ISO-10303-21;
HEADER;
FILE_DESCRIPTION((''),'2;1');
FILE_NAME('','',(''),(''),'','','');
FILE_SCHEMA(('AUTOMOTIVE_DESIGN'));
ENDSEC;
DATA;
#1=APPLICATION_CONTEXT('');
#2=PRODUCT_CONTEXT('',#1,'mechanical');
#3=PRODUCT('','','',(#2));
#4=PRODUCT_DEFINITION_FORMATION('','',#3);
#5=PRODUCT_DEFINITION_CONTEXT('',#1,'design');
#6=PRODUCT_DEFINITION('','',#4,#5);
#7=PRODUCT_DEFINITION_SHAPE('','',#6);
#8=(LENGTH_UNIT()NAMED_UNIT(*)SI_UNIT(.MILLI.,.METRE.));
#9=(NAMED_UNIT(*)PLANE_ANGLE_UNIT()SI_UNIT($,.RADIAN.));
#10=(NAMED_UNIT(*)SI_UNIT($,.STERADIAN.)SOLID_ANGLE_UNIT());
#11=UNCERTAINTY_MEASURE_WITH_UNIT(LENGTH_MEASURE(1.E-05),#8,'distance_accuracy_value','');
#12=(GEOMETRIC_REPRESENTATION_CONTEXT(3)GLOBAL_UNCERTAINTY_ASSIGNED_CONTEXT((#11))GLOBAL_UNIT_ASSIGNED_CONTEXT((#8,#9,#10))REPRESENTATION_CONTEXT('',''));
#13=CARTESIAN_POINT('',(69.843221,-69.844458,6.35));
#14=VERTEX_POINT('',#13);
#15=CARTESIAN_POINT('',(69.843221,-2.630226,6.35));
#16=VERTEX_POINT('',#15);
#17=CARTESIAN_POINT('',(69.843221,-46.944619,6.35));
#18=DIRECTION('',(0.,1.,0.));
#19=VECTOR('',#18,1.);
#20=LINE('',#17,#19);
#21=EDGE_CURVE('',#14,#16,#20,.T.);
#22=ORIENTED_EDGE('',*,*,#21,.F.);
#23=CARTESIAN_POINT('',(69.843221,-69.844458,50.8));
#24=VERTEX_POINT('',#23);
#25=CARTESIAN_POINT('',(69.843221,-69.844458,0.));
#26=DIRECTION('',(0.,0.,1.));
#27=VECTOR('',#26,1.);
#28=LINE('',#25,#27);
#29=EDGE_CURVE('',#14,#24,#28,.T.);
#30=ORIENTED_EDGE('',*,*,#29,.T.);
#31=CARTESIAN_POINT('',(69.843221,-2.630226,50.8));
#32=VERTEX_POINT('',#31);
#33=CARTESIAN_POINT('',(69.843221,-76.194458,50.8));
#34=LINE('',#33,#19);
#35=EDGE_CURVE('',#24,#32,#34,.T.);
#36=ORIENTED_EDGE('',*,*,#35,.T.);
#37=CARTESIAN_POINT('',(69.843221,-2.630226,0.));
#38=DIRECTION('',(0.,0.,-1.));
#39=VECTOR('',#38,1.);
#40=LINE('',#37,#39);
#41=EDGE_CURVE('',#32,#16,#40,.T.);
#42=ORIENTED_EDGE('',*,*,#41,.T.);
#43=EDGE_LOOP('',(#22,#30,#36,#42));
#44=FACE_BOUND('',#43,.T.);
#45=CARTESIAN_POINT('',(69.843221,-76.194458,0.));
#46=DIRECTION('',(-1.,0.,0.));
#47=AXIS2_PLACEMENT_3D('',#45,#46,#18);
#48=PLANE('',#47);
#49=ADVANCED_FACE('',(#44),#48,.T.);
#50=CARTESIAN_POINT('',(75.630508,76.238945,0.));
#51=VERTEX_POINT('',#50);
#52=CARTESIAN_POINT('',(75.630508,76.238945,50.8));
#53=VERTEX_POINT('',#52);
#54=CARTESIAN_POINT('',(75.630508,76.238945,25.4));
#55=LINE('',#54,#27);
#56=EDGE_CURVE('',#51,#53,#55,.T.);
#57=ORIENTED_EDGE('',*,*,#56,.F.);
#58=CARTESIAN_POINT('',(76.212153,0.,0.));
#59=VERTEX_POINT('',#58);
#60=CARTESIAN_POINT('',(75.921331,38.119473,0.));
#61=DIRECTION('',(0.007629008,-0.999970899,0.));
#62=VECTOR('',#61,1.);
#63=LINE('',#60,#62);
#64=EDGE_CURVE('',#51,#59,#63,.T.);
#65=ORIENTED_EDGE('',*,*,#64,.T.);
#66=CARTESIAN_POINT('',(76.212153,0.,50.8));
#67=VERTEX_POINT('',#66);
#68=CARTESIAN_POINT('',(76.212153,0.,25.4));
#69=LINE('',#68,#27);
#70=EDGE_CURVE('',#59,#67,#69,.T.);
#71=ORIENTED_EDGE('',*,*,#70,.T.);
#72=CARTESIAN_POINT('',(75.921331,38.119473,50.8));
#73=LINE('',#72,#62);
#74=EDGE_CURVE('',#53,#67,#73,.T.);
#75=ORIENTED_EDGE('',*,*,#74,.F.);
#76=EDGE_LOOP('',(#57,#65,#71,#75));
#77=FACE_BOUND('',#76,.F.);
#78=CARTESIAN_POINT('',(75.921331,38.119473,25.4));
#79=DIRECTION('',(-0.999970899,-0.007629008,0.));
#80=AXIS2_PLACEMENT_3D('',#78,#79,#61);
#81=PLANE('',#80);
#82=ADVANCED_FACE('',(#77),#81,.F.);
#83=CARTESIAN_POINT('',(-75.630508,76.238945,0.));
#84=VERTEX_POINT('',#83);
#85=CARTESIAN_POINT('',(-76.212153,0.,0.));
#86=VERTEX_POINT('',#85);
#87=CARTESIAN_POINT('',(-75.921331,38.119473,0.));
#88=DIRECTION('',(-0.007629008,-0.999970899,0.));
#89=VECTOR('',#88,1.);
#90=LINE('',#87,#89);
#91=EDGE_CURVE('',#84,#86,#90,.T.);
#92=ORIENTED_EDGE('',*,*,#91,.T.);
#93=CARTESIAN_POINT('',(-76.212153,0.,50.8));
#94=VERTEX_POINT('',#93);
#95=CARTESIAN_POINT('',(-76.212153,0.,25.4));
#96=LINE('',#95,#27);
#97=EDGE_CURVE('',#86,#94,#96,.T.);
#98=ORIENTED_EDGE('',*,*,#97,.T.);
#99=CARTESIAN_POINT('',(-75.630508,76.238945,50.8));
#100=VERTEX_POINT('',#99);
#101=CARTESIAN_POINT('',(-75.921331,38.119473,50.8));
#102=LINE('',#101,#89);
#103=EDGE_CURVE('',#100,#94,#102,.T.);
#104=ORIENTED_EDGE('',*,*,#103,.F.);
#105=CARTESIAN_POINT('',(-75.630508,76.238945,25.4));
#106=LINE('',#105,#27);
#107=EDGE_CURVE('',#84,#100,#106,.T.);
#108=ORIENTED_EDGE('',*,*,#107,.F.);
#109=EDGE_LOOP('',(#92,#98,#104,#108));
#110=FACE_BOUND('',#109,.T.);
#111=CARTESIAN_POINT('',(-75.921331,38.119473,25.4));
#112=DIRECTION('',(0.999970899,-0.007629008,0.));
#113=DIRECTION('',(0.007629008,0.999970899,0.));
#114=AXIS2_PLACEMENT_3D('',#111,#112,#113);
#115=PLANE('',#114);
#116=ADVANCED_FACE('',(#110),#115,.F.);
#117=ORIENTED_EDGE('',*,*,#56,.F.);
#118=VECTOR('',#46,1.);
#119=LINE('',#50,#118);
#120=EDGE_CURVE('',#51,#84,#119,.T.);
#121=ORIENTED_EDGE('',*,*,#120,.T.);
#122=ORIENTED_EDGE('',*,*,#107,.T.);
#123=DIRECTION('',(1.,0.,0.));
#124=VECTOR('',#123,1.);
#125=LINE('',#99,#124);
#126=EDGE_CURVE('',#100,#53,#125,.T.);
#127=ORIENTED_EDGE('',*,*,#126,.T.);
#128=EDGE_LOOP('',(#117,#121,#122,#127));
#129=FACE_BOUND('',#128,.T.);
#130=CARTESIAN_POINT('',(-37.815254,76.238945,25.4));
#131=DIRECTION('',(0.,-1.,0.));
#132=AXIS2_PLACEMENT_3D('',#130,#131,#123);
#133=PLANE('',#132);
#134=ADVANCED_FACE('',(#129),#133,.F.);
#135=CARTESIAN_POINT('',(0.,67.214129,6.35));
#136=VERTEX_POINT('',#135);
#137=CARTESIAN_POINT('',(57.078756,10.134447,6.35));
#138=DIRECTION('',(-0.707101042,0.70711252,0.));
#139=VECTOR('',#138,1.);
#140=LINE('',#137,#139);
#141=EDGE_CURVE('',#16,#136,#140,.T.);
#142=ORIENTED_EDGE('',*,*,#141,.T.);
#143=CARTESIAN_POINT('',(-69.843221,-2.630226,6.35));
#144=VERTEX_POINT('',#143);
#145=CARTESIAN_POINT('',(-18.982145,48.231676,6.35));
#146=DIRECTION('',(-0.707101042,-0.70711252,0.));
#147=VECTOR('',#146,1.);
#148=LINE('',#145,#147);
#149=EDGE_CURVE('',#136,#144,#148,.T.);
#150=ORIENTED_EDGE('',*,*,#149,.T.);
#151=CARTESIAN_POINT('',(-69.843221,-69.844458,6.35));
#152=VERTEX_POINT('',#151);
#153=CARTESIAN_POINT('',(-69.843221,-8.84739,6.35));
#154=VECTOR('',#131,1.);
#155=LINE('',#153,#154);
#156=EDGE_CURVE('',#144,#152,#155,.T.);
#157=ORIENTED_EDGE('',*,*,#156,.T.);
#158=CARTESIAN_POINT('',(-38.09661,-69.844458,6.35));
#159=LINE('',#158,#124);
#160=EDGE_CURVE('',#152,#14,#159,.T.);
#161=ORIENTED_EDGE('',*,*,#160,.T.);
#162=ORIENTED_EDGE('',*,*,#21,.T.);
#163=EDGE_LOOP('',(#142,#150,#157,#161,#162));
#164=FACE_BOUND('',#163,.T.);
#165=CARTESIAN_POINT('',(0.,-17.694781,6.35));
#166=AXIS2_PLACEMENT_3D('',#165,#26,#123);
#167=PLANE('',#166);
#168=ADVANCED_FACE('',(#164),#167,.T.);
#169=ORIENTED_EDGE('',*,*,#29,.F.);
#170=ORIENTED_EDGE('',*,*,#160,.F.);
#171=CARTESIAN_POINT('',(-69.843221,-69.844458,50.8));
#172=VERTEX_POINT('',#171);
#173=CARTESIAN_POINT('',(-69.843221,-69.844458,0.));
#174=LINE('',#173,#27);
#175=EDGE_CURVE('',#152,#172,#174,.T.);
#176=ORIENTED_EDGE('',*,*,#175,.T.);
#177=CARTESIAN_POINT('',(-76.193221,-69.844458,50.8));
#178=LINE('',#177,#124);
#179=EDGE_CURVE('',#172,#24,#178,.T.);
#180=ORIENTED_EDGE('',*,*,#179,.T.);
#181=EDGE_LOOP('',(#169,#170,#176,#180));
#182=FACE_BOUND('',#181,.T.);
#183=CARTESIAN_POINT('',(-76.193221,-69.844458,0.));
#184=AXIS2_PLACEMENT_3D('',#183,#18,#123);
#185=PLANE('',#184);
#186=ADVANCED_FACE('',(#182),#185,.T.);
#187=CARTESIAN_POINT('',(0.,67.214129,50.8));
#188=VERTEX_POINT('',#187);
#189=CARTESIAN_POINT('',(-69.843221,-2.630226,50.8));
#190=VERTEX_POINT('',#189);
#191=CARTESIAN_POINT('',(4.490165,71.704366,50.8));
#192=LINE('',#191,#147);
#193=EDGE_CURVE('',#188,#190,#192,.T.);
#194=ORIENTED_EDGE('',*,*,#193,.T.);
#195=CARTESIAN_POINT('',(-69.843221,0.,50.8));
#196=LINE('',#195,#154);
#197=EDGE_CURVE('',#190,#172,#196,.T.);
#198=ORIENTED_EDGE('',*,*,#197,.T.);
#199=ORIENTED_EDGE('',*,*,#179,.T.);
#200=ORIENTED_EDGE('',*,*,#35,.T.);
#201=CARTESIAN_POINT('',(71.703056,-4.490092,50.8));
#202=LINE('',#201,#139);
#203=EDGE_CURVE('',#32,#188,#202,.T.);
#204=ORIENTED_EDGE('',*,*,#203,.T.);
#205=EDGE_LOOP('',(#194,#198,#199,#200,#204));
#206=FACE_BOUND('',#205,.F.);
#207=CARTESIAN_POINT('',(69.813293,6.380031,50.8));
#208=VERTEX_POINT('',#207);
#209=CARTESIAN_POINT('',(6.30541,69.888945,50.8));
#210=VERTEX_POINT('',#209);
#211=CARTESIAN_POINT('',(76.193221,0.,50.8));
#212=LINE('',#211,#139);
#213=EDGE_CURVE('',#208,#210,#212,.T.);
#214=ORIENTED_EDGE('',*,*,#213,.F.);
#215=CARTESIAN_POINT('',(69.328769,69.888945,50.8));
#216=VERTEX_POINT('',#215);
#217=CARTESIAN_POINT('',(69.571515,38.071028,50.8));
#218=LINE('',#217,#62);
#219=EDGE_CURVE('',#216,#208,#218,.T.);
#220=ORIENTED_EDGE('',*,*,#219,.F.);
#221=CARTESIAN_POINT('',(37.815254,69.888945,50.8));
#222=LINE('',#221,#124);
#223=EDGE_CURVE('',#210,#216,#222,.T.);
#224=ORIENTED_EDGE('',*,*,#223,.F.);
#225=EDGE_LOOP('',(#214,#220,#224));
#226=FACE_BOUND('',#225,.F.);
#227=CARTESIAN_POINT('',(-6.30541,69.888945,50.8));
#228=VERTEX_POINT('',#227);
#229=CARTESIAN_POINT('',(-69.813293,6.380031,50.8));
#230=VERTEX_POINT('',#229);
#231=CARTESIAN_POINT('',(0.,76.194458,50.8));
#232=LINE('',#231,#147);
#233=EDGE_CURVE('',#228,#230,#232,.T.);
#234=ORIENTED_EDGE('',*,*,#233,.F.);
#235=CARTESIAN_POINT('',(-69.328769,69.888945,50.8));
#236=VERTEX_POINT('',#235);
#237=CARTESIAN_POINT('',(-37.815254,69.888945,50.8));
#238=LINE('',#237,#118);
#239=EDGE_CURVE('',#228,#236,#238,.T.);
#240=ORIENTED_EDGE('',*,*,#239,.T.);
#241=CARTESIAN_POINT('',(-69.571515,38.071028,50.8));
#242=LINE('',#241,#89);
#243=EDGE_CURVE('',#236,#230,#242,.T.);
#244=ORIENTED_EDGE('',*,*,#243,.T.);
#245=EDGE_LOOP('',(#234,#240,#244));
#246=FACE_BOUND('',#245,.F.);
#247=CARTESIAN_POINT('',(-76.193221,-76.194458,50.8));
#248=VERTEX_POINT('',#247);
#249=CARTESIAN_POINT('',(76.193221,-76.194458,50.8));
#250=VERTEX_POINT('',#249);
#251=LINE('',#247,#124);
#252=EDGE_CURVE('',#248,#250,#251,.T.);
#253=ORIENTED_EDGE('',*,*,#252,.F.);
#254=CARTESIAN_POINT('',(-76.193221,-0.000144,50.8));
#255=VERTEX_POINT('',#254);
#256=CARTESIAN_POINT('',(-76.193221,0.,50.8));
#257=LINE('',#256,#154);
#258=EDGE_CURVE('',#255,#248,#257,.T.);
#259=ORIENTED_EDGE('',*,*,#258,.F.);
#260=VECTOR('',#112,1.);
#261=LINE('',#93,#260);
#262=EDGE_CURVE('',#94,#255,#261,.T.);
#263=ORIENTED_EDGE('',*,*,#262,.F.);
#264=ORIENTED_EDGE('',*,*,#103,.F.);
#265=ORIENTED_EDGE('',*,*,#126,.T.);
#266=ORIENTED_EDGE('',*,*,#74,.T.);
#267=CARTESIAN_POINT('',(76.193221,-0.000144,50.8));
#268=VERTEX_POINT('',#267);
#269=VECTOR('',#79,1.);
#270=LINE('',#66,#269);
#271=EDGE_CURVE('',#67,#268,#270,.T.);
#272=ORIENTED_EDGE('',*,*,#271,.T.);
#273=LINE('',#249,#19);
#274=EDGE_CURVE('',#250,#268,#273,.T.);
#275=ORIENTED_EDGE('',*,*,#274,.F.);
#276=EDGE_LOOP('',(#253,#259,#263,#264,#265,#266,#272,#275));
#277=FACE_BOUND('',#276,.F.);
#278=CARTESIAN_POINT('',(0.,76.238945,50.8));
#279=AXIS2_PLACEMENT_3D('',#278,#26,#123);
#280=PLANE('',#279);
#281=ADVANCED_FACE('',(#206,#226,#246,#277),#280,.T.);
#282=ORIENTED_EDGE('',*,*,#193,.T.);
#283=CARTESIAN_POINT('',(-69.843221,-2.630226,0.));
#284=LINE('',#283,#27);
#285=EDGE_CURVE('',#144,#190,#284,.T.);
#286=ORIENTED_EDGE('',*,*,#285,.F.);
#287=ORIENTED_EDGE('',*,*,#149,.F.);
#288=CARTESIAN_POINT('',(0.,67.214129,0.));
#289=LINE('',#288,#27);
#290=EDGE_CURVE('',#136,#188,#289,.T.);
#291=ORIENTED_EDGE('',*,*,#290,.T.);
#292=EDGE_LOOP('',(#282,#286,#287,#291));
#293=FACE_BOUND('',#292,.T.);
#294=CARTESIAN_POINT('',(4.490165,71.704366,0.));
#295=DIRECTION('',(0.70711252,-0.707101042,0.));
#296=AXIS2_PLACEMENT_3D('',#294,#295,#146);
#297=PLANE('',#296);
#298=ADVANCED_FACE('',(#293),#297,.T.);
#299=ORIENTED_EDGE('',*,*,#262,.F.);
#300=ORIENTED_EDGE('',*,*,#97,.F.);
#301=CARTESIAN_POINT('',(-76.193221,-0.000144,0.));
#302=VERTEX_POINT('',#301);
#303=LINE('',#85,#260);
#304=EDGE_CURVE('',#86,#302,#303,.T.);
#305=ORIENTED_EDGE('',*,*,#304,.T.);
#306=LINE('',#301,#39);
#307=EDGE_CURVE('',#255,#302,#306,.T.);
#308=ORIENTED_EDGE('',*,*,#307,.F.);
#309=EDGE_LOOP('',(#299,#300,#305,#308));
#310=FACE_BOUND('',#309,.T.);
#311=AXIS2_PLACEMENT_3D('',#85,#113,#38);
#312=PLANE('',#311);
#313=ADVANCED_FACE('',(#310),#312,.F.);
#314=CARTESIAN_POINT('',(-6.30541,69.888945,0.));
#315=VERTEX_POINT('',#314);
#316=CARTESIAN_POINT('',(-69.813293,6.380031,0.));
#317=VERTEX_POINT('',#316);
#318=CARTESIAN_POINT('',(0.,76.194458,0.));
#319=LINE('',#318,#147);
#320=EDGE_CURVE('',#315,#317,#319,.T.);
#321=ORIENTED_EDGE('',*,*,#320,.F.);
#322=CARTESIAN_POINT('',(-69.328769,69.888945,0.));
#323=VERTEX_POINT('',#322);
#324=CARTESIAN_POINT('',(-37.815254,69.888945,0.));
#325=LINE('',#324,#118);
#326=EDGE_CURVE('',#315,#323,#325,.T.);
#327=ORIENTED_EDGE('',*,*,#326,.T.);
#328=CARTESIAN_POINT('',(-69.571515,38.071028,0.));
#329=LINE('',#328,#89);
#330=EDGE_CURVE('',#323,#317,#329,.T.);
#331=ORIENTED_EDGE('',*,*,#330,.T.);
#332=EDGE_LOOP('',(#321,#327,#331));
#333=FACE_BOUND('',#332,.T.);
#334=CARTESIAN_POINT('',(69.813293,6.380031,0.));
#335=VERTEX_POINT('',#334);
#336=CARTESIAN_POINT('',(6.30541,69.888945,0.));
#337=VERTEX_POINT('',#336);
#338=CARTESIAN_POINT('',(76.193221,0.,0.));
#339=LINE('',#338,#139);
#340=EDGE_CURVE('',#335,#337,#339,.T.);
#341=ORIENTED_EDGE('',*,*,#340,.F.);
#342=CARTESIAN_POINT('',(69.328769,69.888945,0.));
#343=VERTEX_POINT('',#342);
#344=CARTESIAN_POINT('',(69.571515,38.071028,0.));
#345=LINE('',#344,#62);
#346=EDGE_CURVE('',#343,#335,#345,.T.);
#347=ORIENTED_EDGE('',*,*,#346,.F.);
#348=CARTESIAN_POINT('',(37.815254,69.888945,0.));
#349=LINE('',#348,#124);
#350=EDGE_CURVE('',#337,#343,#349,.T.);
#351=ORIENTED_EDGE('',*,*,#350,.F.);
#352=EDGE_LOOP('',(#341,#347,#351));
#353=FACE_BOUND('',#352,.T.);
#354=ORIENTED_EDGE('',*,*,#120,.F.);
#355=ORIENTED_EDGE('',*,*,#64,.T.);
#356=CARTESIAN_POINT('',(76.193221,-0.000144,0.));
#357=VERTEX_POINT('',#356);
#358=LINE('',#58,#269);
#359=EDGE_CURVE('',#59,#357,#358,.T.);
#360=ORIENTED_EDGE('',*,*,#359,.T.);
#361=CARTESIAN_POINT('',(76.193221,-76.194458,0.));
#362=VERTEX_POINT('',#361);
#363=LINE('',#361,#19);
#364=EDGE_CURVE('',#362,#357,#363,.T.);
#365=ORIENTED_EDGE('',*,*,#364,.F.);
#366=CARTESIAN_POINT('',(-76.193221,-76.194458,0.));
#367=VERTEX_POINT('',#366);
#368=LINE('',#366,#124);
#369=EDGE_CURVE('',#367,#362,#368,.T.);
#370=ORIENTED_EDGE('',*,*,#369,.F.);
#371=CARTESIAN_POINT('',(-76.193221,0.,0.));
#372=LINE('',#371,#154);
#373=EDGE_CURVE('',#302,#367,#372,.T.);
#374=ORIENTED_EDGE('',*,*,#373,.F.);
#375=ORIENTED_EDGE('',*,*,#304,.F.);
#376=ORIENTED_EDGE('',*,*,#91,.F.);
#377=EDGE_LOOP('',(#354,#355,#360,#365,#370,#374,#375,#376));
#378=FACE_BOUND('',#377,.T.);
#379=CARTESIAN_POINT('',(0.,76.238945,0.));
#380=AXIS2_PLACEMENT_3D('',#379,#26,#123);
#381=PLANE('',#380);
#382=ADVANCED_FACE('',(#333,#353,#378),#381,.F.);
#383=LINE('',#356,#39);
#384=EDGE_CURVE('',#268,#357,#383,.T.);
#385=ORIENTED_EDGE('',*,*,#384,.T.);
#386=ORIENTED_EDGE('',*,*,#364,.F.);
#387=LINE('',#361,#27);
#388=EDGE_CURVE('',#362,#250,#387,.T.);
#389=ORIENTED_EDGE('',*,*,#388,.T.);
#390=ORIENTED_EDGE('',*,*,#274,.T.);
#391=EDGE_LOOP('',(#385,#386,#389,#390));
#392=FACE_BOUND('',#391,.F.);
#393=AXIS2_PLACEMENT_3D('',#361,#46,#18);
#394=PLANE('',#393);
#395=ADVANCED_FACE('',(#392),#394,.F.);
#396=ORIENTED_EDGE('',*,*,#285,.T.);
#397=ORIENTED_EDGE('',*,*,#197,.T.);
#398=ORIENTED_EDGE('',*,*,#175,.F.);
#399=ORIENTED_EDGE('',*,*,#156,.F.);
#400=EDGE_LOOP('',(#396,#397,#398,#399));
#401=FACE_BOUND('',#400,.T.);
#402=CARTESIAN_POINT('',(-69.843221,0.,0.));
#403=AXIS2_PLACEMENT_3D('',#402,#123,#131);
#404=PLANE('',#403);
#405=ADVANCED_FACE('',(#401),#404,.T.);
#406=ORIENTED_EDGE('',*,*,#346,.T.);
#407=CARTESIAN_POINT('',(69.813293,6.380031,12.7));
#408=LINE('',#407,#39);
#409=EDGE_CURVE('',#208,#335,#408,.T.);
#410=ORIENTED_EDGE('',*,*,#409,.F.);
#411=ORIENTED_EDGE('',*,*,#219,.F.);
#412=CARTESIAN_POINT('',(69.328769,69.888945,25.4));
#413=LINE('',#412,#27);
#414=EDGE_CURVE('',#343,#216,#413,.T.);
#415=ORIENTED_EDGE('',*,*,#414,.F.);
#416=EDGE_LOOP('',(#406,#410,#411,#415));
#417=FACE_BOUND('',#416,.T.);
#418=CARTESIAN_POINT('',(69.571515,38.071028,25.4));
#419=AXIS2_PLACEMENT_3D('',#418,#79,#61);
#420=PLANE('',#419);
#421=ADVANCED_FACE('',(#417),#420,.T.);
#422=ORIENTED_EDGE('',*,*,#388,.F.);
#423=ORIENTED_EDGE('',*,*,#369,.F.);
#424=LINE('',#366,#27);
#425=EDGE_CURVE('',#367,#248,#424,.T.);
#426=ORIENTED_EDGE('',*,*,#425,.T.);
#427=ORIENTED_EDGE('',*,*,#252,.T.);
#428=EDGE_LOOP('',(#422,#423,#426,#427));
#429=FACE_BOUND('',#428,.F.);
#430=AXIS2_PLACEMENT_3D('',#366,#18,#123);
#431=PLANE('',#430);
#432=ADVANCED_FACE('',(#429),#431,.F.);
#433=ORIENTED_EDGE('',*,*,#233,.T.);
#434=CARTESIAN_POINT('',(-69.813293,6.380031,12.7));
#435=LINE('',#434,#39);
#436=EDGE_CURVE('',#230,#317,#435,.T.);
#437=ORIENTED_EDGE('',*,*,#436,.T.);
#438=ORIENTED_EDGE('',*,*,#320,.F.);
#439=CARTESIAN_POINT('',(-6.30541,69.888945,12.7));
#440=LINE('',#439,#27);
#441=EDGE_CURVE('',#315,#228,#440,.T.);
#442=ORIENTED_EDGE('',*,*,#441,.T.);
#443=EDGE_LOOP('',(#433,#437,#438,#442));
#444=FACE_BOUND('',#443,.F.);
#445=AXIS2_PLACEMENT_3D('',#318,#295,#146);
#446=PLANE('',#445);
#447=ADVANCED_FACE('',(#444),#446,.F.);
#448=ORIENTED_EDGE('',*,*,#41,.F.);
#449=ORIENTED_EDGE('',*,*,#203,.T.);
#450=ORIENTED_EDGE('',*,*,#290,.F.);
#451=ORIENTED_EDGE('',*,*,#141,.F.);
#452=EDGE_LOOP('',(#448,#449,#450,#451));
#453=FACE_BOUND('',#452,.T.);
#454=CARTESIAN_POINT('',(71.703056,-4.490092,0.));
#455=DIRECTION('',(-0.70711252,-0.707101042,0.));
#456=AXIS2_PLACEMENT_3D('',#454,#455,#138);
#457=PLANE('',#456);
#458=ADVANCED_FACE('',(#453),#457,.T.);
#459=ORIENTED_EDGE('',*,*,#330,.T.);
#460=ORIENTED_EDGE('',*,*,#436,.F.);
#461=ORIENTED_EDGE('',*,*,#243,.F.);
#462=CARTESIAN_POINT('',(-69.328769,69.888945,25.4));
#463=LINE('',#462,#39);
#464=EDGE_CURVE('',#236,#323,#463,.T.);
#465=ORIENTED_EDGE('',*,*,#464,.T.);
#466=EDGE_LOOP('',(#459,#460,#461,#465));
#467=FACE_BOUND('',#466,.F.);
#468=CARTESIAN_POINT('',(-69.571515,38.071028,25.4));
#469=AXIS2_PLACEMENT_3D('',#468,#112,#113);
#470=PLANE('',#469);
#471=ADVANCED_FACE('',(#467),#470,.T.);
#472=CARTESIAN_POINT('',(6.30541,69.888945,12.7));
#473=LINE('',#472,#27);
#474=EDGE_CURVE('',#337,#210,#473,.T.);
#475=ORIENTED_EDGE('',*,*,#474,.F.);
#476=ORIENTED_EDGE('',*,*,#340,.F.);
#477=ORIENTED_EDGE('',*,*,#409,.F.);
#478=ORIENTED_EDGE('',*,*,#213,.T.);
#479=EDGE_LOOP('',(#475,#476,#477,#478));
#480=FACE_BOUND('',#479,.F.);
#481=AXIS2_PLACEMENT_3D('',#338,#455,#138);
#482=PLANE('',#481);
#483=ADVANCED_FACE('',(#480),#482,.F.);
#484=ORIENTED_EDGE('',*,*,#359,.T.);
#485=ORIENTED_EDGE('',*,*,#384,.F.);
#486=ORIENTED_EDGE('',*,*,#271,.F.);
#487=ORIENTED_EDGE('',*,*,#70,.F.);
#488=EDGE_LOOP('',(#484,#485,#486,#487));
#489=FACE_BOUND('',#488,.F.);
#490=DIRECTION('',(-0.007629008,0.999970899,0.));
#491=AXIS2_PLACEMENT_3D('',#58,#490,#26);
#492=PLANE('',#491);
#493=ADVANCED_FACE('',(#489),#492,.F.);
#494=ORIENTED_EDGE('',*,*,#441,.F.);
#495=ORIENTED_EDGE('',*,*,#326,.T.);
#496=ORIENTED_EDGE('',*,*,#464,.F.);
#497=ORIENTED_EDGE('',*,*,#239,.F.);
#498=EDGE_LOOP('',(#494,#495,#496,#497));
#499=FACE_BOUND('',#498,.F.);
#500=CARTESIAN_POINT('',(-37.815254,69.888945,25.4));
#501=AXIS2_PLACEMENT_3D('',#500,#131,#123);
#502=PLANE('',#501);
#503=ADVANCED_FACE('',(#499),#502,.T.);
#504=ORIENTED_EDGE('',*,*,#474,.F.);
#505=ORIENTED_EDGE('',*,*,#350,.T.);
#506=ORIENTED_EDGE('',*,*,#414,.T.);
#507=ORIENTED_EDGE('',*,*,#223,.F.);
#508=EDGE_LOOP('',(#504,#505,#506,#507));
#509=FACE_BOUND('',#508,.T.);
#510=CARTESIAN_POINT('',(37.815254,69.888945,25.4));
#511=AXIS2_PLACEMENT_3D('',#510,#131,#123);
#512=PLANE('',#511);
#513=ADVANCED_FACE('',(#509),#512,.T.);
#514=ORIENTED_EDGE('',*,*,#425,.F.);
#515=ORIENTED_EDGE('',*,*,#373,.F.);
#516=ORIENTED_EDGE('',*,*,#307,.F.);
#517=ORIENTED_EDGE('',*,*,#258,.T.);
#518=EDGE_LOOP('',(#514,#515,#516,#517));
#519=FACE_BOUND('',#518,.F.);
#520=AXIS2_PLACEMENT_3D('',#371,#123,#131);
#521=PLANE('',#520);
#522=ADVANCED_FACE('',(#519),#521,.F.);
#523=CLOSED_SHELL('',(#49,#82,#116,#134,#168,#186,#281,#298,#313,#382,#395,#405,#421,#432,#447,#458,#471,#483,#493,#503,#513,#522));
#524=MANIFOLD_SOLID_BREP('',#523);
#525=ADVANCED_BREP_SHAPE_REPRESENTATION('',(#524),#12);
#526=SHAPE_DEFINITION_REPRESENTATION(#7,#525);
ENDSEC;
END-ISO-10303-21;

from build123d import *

# Parameters (mm, degrees)
F1_DEPTH = 50.8
F2_T     = -6.35
F4_E4_W  = 76.2411638441
F4_E4_H  = 50.8
F5_DEPTH = 6.35
F4_E3_W  = 75.6305083632
F4_E3_H  = 50.8
F6_DEPTH = 6.35


# Not quite as in the source:
# - a feature of the source that left no trace in its solid (it failed there, or was rolled back) is left out
# - a pattern or mirror of a feature is missing from the dataset's text; its kind, count and spacing are read off the source's solid


with BuildPart() as f1:
    # F0 (on Top) → F1 (new body)
    with BuildSketch(Plane.XY):
        Polygon((76.1932209134, 0), (0, 76.1944577098), (-76.1932209134, 0), (-76.1932209134, -76.1944577098), (76.1932209134, -76.1944577098), align=None)
    extrude(amount=F1_DEPTH)

    # F2
    f2_openings = [f1.faces().sort_by_distance(p)[0] for p in [
        (0, -16.932102, 50.8),
    ]]
    offset(amount=F2_T, openings=f2_openings)

    # F4_E4 (on explicit) → F5 (join)
    with BuildSketch(Plane(origin=(75.6305083632, 76.2389451265, 0), x_dir=(0.0076290083, -0.9999708987, 0), z_dir=(-0.9999708987, -0.0076290083, 0))):
        with Locations((38.120581922, 25.4)):
            Rectangle(F4_E4_W, F4_E4_H)
    f5 = extrude(amount=F5_DEPTH)

    # F5_copies: F5 across plane
    add(f5.mirror(Plane(origin=(0, 0, 0), x_dir=(0, 0, -1), z_dir=(-1, 0, 0))))

    # F4_E3 (on explicit) → F6 (join)
    with BuildSketch(Plane.XZ.offset(-76.2389451265)):
        with Locations((37.8152541816, 25.4)):
            Rectangle(F4_E3_W, F4_E3_H)
    f6 = extrude(amount=F6_DEPTH)

    # F6_copies: F6 across plane
    add(f6.mirror(Plane(origin=(0, 0, 0), x_dir=(0, 0, -1), z_dir=(-1, 0, 0))))


solid = f1.part
